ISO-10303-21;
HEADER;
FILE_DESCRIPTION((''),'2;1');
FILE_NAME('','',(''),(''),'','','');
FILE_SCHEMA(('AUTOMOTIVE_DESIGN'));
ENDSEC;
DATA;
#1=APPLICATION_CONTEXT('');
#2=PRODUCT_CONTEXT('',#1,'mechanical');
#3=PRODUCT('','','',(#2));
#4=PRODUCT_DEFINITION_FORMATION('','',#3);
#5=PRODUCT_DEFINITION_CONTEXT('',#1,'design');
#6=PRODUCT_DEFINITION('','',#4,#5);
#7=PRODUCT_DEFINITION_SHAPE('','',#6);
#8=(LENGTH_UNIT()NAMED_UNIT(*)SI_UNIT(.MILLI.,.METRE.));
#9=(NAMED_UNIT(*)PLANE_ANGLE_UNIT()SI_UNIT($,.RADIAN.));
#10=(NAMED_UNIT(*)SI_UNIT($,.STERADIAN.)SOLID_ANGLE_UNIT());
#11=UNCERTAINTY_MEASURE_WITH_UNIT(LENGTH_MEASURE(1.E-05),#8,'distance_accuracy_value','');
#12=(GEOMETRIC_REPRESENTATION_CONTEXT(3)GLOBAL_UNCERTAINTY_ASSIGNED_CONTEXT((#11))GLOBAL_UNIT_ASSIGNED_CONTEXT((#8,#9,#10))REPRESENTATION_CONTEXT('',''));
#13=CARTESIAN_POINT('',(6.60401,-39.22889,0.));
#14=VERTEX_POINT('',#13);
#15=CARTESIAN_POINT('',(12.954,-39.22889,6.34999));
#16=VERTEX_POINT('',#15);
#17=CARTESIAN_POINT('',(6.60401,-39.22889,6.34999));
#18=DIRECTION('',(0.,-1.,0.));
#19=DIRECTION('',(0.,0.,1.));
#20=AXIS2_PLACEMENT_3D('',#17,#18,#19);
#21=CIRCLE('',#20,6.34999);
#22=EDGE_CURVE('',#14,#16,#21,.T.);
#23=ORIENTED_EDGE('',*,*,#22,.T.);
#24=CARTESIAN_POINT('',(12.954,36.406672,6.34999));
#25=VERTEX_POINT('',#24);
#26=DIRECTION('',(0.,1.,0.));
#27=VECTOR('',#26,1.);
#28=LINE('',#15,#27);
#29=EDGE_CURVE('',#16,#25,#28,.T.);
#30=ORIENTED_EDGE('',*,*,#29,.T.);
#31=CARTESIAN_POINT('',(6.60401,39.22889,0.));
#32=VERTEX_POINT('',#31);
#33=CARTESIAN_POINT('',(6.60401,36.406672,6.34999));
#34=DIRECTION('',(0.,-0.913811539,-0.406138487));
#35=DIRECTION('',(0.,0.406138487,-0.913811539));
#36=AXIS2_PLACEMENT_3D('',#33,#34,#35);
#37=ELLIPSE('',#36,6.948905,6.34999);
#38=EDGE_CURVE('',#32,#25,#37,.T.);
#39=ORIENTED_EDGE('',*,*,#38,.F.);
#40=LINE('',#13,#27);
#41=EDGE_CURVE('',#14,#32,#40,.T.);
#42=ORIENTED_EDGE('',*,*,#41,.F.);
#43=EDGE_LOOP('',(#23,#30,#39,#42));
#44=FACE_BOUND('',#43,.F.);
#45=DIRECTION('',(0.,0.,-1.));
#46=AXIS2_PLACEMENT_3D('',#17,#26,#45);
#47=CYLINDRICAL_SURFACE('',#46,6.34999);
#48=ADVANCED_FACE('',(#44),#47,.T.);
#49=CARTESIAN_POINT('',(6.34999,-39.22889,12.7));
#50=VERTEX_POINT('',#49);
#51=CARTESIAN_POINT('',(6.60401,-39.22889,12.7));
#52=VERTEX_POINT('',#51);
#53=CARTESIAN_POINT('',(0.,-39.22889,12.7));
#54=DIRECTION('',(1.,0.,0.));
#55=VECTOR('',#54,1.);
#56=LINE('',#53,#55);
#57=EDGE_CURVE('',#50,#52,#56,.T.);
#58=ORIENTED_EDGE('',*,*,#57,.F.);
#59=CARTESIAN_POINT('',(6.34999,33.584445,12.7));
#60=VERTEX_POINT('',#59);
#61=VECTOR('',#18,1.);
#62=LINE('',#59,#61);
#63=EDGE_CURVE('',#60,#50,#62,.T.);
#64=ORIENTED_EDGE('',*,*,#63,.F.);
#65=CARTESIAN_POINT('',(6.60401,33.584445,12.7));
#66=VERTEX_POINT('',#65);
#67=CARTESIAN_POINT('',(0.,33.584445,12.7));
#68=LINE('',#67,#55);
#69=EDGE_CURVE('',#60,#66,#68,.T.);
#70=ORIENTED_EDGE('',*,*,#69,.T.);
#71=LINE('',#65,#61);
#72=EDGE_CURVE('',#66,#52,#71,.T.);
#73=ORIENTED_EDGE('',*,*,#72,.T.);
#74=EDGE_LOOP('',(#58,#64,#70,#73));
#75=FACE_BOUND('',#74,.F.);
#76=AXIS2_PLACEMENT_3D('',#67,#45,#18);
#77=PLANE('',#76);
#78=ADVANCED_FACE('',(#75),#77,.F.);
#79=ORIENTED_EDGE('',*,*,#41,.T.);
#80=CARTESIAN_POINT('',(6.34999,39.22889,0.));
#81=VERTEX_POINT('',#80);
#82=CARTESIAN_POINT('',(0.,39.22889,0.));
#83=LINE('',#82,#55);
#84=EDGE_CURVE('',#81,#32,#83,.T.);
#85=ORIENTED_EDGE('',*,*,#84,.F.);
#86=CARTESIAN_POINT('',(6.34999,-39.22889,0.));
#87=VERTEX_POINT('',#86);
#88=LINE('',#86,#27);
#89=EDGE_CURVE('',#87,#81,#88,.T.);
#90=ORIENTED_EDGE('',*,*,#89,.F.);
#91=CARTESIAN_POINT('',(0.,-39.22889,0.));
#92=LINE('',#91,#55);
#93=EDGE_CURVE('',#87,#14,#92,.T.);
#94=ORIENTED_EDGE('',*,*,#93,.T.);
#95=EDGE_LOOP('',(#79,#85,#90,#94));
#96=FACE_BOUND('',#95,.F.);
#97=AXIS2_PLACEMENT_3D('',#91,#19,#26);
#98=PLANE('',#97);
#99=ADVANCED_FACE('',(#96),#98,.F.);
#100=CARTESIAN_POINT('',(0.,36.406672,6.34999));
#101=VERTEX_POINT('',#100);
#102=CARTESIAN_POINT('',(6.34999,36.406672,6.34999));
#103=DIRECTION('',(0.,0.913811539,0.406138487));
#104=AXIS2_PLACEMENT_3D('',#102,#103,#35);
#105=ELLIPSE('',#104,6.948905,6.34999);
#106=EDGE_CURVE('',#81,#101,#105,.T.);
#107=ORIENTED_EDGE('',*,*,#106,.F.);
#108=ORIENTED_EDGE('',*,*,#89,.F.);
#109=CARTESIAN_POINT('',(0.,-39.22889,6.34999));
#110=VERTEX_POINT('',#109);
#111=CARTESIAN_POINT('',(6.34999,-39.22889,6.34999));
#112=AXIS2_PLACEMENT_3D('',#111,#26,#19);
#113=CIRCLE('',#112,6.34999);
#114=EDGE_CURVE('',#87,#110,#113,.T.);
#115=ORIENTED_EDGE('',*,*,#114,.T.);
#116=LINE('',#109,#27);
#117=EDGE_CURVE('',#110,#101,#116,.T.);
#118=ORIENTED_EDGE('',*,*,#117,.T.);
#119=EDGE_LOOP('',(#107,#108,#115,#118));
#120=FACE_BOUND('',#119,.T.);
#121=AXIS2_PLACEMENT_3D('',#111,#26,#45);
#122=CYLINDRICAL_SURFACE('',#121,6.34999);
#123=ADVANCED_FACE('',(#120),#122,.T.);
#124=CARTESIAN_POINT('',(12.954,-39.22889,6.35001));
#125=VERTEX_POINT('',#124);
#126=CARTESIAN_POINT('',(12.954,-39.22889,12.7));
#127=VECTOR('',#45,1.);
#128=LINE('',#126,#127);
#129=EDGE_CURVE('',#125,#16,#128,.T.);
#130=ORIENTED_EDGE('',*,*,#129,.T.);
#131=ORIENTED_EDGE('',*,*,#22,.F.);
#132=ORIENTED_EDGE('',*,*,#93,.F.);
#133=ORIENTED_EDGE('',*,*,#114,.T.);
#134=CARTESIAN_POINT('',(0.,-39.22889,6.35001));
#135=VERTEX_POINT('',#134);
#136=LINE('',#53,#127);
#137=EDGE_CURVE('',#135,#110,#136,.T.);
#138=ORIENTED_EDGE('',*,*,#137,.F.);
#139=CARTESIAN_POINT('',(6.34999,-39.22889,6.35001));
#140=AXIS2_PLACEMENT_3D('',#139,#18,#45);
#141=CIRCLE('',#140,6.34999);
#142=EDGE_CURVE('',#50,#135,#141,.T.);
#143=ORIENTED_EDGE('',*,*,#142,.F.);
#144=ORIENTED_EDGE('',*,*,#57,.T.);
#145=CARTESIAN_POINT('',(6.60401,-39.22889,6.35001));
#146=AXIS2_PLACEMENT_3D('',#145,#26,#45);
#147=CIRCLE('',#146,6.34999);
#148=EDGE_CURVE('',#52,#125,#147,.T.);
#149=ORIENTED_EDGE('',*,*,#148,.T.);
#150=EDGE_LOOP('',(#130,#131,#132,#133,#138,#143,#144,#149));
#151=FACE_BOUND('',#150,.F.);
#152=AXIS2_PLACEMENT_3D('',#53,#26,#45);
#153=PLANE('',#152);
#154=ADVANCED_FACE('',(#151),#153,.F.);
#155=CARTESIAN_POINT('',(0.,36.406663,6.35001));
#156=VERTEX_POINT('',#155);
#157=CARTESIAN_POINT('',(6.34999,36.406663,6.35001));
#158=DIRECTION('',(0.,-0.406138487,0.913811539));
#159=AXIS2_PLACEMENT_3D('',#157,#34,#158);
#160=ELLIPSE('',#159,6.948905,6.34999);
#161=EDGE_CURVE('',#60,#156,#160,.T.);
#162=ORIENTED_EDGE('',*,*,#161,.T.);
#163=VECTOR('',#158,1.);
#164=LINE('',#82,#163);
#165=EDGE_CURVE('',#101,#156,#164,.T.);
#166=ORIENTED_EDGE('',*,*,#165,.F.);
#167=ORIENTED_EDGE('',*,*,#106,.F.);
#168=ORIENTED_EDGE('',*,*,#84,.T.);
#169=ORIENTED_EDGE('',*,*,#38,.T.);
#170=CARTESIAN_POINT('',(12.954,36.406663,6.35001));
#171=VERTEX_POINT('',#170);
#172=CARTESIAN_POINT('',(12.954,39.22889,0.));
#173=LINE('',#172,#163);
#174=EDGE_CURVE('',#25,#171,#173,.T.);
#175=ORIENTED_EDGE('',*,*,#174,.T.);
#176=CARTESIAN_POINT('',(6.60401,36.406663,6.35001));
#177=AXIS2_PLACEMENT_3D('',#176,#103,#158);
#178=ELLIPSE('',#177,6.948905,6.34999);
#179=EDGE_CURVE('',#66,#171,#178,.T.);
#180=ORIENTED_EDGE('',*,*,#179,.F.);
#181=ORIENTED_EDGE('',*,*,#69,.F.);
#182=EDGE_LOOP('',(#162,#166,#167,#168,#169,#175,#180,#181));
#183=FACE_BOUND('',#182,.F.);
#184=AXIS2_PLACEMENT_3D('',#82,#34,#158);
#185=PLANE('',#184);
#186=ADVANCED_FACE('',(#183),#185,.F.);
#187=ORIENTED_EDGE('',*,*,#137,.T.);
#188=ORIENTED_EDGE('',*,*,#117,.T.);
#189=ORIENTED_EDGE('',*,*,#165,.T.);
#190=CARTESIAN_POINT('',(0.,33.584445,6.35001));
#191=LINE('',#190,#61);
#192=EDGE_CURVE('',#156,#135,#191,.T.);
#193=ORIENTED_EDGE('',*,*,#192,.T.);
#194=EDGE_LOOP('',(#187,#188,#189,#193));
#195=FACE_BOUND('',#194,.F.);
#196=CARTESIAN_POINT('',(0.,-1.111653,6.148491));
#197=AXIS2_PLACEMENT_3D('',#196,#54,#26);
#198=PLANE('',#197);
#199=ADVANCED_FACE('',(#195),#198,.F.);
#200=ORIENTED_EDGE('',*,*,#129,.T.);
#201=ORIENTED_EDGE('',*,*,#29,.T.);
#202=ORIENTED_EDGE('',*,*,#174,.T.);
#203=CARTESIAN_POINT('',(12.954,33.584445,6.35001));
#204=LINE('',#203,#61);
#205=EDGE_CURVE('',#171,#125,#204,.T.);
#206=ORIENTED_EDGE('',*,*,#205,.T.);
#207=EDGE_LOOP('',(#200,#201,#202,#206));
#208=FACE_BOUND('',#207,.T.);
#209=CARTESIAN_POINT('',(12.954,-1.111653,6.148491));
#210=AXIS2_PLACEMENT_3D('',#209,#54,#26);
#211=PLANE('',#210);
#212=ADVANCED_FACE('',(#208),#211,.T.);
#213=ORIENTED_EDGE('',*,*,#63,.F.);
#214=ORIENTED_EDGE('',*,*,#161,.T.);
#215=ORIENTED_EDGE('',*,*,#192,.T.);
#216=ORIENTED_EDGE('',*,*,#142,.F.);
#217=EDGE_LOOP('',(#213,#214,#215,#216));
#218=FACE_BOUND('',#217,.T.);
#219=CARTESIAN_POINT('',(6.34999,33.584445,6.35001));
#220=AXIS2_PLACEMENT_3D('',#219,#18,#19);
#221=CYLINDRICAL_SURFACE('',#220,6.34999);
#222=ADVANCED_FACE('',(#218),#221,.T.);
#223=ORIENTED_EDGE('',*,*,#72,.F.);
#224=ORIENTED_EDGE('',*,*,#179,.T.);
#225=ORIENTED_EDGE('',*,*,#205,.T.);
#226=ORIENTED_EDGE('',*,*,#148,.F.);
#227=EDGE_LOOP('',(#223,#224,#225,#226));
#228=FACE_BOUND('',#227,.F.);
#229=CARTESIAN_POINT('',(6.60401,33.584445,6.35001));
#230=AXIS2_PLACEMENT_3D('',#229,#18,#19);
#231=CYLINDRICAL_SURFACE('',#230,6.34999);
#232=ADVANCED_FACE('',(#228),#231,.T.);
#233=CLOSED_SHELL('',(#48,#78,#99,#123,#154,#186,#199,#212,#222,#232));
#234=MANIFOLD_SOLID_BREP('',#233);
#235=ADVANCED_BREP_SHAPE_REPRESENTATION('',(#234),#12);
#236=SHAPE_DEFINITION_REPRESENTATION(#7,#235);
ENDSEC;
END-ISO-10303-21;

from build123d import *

# Parameters (mm, degrees)
F2_DEPTH = 12.954
F3_R     = 6.34999


# Not quite as in the source:
# - a fillet or chamfer is up to 0.001 mm smaller than in the source, because OpenCascade refuses the exact size


with BuildPart() as f2:
    # F1 (on Right) → F2 (new body)
    with BuildSketch(Plane.YZ):
        Polygon((-39.228890075, 12.7), (-39.228890075, 0), (39.228890075, 0), (33.5844452765, 12.7), align=None)
    extrude(amount=F2_DEPTH)

    # F3 (radius 6.35 in the source; OpenCascade refuses exactly that, so slightly less here)
    f3_edges = [f2.edges().sort_by_distance(p)[0] for p in [
        (12.954, 0, 0),
        (12.954, -2.822222, 12.7),
        (0, -2.822222, 12.7),
        (0, 0, 0),
    ]]
    fillet(f3_edges, radius=F3_R)


solid = f2.part
